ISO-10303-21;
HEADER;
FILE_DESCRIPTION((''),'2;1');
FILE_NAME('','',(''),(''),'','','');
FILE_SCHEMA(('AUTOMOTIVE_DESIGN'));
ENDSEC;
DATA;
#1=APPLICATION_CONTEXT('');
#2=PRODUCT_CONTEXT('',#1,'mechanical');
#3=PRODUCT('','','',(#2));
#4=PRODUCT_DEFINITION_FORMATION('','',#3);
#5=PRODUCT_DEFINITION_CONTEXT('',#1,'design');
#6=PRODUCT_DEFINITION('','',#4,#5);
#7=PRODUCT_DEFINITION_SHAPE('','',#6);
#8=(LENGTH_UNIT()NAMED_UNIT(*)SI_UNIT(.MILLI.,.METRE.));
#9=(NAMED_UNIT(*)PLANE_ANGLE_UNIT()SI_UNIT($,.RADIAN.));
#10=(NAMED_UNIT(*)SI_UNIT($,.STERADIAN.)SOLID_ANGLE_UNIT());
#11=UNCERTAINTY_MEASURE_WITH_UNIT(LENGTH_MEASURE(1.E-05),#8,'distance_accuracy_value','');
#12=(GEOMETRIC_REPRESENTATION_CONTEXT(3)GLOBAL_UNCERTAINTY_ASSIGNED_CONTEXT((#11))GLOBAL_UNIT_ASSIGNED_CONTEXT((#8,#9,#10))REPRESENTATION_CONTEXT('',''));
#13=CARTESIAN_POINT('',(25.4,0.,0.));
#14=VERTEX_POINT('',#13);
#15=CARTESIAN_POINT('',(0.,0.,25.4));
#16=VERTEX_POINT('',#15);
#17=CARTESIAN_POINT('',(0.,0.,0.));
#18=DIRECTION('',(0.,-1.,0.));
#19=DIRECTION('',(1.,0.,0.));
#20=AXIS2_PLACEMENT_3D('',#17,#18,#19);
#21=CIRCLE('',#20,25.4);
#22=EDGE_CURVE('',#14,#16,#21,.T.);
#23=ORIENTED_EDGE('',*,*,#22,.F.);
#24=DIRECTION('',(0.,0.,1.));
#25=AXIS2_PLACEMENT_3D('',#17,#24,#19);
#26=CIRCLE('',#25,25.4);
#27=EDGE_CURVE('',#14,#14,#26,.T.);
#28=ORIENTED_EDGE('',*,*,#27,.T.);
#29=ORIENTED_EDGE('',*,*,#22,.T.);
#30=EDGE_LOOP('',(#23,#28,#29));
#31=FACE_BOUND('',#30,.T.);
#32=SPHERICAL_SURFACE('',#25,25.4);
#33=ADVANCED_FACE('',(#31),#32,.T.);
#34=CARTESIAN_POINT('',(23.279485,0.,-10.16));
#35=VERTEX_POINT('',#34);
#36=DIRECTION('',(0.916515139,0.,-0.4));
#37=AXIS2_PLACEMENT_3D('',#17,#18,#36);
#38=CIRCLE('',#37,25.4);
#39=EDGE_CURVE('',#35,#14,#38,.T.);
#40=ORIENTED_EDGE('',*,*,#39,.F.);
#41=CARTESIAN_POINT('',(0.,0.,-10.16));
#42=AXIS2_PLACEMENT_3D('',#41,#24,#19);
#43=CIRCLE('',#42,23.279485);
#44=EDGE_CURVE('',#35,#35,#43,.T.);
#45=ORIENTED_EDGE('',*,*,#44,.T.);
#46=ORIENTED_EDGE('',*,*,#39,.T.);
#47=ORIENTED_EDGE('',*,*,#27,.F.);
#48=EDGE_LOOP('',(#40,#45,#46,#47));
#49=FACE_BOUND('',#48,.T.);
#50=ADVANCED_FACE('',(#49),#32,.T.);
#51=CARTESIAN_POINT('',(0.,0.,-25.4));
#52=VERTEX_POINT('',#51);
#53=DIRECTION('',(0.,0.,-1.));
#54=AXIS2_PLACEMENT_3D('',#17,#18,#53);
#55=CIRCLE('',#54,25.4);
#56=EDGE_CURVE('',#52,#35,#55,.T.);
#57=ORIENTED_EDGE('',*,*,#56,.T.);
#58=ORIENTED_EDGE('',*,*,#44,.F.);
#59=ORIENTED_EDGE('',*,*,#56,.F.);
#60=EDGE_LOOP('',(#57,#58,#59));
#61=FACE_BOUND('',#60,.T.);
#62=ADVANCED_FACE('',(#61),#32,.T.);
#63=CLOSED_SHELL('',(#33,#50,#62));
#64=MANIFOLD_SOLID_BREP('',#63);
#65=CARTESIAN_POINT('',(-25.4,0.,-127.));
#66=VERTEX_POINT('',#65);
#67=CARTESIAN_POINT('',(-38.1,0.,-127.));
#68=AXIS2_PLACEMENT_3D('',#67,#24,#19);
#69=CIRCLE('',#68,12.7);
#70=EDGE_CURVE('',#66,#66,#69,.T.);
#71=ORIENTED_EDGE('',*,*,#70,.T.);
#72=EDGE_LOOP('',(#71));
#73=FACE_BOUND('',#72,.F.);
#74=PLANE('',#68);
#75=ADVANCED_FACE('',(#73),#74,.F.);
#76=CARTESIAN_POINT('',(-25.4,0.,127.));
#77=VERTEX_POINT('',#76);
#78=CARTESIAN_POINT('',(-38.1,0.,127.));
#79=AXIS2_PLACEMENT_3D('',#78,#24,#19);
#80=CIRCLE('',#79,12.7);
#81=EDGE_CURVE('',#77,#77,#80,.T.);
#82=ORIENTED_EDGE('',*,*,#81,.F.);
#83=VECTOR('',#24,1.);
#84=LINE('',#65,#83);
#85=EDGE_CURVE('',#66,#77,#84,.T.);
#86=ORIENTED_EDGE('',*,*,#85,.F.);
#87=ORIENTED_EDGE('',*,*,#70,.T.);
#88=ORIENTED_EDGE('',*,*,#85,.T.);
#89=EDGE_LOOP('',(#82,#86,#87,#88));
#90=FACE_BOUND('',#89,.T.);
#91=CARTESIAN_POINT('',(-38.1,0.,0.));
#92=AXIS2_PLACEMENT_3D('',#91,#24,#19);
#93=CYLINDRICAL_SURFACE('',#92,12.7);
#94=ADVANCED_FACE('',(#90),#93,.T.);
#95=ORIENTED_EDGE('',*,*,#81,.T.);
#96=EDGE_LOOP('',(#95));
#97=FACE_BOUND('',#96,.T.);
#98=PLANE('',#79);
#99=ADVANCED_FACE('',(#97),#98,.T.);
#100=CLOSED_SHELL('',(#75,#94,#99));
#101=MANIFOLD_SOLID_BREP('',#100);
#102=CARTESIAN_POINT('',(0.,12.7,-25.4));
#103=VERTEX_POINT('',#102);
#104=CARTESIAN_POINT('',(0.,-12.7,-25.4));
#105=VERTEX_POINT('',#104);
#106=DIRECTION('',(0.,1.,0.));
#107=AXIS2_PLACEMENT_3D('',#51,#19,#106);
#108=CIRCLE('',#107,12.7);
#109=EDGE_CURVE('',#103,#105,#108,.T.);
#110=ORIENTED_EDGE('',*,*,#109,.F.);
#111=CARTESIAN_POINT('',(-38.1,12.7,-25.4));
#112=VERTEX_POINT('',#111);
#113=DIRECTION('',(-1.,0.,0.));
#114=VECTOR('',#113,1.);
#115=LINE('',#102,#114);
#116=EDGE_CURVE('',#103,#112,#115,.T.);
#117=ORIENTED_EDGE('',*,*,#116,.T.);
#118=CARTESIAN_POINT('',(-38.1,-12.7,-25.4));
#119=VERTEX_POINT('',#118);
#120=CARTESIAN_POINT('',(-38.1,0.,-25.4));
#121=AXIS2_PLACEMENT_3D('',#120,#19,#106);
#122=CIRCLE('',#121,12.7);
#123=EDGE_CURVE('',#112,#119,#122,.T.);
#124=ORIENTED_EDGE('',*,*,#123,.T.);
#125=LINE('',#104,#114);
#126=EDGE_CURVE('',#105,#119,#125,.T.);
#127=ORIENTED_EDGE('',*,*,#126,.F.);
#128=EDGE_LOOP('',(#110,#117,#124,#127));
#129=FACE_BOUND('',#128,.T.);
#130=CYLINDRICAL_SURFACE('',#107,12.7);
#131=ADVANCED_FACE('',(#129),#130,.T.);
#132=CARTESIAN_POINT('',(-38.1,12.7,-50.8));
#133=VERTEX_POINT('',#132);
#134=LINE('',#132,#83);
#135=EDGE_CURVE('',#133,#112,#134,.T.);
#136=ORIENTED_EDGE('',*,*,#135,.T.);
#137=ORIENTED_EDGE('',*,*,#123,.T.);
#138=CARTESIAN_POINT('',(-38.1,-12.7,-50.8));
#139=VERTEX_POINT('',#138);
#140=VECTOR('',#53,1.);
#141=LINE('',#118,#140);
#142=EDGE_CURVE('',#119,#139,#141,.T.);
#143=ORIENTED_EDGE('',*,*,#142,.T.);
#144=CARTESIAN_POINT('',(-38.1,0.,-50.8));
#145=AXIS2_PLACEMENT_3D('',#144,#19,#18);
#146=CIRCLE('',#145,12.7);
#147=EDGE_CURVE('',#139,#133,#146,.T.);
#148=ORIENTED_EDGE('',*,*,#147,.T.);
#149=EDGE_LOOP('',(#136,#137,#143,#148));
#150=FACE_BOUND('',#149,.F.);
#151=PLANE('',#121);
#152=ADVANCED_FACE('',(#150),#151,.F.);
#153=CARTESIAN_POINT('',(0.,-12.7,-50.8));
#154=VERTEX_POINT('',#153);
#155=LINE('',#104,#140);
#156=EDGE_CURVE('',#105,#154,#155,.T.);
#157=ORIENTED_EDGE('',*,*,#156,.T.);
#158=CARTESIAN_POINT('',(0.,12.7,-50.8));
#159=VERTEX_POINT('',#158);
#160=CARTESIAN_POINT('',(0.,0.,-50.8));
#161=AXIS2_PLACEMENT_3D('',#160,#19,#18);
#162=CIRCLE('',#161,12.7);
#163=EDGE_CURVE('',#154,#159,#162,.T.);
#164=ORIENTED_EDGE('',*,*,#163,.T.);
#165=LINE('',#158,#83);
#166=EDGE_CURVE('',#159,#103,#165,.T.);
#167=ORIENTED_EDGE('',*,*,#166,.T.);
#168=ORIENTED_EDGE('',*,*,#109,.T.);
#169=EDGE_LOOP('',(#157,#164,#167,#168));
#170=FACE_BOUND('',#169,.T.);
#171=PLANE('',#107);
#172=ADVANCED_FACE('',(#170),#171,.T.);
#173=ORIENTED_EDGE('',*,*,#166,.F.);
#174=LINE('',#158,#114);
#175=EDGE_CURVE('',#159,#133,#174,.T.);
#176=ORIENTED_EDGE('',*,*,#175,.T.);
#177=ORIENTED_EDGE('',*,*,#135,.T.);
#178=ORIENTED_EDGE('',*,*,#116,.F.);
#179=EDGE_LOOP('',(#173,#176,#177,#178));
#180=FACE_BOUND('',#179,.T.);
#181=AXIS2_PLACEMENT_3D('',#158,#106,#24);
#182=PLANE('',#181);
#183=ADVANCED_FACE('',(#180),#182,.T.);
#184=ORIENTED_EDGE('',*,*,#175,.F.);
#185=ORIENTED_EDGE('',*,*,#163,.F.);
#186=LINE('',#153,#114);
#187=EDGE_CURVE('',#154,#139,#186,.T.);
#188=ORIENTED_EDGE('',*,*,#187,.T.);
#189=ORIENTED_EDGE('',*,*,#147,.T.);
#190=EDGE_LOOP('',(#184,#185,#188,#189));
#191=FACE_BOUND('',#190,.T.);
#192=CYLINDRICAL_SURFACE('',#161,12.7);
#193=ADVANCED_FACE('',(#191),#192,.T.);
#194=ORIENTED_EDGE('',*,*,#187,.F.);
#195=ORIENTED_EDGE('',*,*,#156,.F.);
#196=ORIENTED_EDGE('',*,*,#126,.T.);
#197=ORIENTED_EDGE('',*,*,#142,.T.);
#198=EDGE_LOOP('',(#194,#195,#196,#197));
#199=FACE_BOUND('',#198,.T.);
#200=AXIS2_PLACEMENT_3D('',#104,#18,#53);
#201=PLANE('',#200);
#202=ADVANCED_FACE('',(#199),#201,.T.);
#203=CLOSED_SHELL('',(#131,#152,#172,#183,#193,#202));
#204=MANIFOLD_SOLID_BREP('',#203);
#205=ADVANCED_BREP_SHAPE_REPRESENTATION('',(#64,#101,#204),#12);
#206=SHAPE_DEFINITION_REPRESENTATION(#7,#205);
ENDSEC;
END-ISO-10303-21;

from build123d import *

# Parameters (mm, degrees)
F0_R     = 12.7
F2_DEPTH = 127
F4_DEPTH = 38.1


# Not quite as in the source:
# - the program builds the solid bodies; features that only make, move or delete a surface that nothing else refers to are left out


with BuildPart() as f2:
    # F0 (on Top) → F2 (new body, symmetric)
    with BuildSketch(Plane.XY):
        with Locations((-38.1, 0)):
            Circle(F0_R)
    extrude(amount=F2_DEPTH, both=True)


with BuildPart() as f4:
    # F3 (on Right) → F4 (new body)
    with BuildSketch(Plane.YZ):
        with BuildLine():
            ThreePointArc((-12.7, -25.4), (0, -38.1), (12.7, -25.4))
            ThreePointArc((12.7, -25.4), (0, -12.7), (-12.7, -25.4))
        make_face()
        with BuildLine():
            Line((12.7, -50.8), (12.7, -25.4))
            ThreePointArc((12.7, -25.4), (0, -38.1), (-12.7, -25.4))
            Line((-12.7, -25.4), (-12.7, -50.8))
            Line((-12.7, -50.8), (12.7, -50.8))
        make_face()
        with BuildLine():
            ThreePointArc((-12.7, -50.8), (0, -63.5), (12.7, -50.8))
            Line((12.7, -50.8), (-12.7, -50.8))
        make_face()
    extrude(amount=-F4_DEPTH)


with BuildPart() as f8:
    # F7 (on Front) → F8 (revolve)
    with BuildSketch(Plane.XZ):
        with BuildLine():
            ThreePointArc((23.2794845304, -10.16), (24.8642203484, -5.1894649497), (25.4, 0))
            ThreePointArc((25.4, 0), (17.9605122421, 17.9605122421), (0, 25.4))
            Line((0, 25.4), (0, -10.16))
            Line((0, -10.16), (23.2794845304, -10.16))
        make_face()
        with BuildLine():
            ThreePointArc((0, -25.4), (13.9121529606, -21.251164674), (23.2794845304, -10.16))
            Line((23.2794845304, -10.16), (0, -10.16))
            Line((0, -10.16), (0, -25.4))
        make_face()
    revolve(axis=Axis((0, 0, 0), (0, 0, 1)))


solid = Compound([f2.part, f4.part, f8.part])
